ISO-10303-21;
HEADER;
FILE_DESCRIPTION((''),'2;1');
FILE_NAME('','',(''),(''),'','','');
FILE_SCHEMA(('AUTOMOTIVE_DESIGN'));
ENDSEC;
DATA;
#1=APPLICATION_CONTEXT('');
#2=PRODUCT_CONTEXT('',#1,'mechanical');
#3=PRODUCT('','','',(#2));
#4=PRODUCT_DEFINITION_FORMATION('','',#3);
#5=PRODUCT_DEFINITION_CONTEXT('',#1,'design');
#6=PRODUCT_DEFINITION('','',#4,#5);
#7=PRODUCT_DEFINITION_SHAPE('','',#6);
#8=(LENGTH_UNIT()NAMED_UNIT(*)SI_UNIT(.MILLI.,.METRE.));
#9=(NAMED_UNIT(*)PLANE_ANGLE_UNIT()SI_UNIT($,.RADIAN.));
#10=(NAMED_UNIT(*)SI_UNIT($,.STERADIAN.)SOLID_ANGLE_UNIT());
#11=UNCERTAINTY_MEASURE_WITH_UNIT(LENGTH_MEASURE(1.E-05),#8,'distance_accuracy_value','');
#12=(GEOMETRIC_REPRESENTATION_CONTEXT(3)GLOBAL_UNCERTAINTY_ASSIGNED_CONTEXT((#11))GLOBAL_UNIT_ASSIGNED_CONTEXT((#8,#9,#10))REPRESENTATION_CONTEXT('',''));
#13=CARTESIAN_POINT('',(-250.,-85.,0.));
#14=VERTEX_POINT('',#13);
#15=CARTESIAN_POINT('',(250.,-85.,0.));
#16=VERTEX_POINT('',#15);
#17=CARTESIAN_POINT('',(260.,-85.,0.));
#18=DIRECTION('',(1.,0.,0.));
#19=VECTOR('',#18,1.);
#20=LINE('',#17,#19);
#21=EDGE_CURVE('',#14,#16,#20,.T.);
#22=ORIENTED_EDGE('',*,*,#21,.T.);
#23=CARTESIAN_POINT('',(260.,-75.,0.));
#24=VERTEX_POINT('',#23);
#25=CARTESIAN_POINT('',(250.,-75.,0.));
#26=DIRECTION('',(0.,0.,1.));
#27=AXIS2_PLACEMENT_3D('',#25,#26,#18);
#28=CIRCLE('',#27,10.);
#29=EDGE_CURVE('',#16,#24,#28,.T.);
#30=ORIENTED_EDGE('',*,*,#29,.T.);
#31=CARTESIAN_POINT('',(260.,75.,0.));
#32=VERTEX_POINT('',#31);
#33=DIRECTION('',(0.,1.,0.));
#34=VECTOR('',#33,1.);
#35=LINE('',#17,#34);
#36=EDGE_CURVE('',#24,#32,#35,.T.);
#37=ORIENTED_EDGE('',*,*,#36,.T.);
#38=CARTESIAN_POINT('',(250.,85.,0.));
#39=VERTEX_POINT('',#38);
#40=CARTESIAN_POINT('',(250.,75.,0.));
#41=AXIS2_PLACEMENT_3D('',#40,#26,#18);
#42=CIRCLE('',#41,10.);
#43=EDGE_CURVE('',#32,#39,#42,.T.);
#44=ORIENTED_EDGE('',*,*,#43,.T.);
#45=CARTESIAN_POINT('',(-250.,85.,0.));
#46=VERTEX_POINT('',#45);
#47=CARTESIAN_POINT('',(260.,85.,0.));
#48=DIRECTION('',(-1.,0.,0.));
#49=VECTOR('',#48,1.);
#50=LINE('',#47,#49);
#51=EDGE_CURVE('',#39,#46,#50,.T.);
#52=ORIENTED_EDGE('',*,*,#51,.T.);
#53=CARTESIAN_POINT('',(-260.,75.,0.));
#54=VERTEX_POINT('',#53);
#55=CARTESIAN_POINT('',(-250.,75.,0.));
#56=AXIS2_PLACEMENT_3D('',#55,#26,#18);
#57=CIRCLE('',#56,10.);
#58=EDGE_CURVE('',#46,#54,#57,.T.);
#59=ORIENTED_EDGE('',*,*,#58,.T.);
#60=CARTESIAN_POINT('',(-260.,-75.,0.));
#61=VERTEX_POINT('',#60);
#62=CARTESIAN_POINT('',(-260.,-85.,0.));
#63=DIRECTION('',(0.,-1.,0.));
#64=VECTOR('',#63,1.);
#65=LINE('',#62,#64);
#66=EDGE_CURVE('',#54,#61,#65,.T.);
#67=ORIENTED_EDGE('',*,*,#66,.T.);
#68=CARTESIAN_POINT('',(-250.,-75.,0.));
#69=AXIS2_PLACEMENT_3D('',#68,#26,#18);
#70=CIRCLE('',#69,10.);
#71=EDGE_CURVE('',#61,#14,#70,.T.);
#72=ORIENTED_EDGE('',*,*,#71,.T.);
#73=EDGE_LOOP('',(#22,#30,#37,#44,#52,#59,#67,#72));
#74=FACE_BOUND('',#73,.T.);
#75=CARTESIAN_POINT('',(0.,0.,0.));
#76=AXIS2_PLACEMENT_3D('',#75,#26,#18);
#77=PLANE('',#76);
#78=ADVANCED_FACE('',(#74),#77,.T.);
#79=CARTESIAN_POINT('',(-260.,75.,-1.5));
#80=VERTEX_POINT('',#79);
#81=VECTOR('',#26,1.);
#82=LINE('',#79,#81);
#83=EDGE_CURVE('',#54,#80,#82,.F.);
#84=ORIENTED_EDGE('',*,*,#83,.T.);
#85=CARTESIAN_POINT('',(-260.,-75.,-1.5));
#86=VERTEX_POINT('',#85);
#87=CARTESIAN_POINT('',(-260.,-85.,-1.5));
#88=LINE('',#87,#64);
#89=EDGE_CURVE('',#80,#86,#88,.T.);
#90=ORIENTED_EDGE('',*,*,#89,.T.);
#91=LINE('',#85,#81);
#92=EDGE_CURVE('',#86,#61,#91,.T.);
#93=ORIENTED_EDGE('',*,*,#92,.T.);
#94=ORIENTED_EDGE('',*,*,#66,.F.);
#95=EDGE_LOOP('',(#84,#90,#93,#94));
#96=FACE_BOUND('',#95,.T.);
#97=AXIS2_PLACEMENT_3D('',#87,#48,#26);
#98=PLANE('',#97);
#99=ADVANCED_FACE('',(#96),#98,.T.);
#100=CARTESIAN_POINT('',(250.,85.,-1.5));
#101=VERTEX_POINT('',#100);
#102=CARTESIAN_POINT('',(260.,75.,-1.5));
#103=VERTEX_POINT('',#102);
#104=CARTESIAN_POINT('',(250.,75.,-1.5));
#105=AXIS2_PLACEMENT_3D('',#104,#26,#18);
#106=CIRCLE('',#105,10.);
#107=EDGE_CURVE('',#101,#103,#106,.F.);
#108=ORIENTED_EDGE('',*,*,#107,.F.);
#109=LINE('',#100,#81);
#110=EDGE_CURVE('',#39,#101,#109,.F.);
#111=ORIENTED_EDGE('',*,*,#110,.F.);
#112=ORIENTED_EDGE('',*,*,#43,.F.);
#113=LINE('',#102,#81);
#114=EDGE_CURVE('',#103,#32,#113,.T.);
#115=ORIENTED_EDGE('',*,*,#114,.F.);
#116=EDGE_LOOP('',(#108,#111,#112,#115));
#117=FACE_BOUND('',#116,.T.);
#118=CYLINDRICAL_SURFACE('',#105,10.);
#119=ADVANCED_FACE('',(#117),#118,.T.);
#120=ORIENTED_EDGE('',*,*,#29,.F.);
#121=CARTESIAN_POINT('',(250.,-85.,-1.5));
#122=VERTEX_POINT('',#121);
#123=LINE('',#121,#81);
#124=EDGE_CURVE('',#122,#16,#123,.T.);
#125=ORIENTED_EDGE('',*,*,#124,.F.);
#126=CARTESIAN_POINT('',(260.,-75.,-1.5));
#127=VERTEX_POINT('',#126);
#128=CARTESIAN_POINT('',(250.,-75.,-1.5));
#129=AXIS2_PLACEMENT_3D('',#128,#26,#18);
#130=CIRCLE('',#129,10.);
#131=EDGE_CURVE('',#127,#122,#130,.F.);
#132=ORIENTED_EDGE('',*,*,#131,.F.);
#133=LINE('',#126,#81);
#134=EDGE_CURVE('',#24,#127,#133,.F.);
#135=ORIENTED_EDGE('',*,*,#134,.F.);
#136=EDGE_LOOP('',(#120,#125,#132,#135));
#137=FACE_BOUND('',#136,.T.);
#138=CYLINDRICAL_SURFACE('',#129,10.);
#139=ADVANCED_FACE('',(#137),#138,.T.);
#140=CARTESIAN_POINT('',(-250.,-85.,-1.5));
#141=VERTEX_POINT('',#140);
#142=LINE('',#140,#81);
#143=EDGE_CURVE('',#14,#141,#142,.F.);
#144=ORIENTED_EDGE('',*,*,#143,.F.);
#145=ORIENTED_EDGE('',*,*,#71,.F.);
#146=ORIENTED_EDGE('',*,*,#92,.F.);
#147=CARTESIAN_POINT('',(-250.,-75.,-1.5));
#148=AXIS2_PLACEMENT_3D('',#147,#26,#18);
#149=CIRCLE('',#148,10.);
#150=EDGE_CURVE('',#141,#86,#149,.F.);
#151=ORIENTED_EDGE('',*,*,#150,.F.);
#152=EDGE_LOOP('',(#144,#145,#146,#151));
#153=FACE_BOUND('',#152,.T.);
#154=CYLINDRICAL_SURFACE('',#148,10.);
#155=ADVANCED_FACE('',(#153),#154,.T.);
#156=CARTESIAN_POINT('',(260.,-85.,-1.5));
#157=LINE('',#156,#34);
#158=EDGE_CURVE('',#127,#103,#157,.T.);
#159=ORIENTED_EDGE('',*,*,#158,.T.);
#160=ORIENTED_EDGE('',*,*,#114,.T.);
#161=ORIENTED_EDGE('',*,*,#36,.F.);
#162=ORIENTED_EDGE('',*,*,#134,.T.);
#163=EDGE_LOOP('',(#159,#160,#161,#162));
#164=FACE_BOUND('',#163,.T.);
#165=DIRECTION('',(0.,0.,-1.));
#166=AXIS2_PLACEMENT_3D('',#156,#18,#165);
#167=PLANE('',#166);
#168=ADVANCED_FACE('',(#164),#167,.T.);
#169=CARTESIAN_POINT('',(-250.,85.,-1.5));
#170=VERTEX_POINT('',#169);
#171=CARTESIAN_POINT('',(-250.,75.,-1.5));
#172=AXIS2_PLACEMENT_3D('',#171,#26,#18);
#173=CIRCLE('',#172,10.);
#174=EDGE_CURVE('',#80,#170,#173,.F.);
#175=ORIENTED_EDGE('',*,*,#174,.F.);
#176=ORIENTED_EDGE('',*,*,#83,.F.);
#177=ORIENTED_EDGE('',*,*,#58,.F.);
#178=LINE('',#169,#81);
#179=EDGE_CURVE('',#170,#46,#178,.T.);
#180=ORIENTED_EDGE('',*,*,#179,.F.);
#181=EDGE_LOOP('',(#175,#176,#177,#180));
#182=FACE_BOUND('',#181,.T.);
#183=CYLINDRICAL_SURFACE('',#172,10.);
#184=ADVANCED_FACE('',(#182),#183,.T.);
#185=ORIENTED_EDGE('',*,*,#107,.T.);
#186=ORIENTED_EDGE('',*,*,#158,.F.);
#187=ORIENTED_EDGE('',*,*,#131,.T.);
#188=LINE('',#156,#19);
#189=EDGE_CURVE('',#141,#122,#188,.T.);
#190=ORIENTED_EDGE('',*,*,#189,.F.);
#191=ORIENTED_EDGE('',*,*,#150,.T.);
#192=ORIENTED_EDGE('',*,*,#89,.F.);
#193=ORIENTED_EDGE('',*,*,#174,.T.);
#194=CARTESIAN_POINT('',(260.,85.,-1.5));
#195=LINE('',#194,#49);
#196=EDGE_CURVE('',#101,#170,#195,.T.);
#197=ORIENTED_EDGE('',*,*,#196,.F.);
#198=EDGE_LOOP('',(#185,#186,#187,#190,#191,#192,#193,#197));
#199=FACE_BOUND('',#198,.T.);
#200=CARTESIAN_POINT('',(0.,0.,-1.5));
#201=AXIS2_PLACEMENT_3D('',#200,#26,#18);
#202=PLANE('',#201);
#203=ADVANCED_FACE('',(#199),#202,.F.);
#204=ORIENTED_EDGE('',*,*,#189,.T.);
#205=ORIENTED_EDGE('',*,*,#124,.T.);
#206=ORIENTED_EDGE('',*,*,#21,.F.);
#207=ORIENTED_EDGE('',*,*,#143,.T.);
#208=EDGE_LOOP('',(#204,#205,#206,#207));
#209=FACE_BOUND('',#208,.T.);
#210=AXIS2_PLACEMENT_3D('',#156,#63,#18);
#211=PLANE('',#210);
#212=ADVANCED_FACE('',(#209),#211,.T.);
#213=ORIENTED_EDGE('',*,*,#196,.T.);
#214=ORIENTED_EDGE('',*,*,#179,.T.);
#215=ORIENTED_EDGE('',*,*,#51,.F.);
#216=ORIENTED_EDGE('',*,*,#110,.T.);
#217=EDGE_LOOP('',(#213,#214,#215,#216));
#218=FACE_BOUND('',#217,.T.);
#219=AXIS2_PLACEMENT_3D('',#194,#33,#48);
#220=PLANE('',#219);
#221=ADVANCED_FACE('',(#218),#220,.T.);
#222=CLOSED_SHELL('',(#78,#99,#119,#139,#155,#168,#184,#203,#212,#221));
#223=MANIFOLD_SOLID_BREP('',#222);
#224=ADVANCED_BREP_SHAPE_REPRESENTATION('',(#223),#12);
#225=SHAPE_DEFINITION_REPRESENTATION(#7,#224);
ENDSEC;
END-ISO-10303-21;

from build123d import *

# Parameters (mm, degrees)
SKETCH1_W          = 520
SKETCH1_H          = 170
BASE_FLANGE1_DEPTH = 1.5
FILLET1_R          = 10


# Sheet-metal steps are written as plain solids
with BuildPart() as part:
    # Sketch1 → Base-Flange1 (new body)
    with BuildSketch(Plane.XY):
        Rectangle(SKETCH1_W, SKETCH1_H)
    extrude(amount=-BASE_FLANGE1_DEPTH)

    # Fillet1
    fillet1_edges = [part.edges().sort_by_distance(p)[0] for p in [
        (-260, 85, -0.75),
        (260, 85, -0.75),
        (260, -85, -0.75),
        (-260, -85, -0.75),
    ]]
    fillet(fillet1_edges, radius=FILLET1_R)


solid = part.part
